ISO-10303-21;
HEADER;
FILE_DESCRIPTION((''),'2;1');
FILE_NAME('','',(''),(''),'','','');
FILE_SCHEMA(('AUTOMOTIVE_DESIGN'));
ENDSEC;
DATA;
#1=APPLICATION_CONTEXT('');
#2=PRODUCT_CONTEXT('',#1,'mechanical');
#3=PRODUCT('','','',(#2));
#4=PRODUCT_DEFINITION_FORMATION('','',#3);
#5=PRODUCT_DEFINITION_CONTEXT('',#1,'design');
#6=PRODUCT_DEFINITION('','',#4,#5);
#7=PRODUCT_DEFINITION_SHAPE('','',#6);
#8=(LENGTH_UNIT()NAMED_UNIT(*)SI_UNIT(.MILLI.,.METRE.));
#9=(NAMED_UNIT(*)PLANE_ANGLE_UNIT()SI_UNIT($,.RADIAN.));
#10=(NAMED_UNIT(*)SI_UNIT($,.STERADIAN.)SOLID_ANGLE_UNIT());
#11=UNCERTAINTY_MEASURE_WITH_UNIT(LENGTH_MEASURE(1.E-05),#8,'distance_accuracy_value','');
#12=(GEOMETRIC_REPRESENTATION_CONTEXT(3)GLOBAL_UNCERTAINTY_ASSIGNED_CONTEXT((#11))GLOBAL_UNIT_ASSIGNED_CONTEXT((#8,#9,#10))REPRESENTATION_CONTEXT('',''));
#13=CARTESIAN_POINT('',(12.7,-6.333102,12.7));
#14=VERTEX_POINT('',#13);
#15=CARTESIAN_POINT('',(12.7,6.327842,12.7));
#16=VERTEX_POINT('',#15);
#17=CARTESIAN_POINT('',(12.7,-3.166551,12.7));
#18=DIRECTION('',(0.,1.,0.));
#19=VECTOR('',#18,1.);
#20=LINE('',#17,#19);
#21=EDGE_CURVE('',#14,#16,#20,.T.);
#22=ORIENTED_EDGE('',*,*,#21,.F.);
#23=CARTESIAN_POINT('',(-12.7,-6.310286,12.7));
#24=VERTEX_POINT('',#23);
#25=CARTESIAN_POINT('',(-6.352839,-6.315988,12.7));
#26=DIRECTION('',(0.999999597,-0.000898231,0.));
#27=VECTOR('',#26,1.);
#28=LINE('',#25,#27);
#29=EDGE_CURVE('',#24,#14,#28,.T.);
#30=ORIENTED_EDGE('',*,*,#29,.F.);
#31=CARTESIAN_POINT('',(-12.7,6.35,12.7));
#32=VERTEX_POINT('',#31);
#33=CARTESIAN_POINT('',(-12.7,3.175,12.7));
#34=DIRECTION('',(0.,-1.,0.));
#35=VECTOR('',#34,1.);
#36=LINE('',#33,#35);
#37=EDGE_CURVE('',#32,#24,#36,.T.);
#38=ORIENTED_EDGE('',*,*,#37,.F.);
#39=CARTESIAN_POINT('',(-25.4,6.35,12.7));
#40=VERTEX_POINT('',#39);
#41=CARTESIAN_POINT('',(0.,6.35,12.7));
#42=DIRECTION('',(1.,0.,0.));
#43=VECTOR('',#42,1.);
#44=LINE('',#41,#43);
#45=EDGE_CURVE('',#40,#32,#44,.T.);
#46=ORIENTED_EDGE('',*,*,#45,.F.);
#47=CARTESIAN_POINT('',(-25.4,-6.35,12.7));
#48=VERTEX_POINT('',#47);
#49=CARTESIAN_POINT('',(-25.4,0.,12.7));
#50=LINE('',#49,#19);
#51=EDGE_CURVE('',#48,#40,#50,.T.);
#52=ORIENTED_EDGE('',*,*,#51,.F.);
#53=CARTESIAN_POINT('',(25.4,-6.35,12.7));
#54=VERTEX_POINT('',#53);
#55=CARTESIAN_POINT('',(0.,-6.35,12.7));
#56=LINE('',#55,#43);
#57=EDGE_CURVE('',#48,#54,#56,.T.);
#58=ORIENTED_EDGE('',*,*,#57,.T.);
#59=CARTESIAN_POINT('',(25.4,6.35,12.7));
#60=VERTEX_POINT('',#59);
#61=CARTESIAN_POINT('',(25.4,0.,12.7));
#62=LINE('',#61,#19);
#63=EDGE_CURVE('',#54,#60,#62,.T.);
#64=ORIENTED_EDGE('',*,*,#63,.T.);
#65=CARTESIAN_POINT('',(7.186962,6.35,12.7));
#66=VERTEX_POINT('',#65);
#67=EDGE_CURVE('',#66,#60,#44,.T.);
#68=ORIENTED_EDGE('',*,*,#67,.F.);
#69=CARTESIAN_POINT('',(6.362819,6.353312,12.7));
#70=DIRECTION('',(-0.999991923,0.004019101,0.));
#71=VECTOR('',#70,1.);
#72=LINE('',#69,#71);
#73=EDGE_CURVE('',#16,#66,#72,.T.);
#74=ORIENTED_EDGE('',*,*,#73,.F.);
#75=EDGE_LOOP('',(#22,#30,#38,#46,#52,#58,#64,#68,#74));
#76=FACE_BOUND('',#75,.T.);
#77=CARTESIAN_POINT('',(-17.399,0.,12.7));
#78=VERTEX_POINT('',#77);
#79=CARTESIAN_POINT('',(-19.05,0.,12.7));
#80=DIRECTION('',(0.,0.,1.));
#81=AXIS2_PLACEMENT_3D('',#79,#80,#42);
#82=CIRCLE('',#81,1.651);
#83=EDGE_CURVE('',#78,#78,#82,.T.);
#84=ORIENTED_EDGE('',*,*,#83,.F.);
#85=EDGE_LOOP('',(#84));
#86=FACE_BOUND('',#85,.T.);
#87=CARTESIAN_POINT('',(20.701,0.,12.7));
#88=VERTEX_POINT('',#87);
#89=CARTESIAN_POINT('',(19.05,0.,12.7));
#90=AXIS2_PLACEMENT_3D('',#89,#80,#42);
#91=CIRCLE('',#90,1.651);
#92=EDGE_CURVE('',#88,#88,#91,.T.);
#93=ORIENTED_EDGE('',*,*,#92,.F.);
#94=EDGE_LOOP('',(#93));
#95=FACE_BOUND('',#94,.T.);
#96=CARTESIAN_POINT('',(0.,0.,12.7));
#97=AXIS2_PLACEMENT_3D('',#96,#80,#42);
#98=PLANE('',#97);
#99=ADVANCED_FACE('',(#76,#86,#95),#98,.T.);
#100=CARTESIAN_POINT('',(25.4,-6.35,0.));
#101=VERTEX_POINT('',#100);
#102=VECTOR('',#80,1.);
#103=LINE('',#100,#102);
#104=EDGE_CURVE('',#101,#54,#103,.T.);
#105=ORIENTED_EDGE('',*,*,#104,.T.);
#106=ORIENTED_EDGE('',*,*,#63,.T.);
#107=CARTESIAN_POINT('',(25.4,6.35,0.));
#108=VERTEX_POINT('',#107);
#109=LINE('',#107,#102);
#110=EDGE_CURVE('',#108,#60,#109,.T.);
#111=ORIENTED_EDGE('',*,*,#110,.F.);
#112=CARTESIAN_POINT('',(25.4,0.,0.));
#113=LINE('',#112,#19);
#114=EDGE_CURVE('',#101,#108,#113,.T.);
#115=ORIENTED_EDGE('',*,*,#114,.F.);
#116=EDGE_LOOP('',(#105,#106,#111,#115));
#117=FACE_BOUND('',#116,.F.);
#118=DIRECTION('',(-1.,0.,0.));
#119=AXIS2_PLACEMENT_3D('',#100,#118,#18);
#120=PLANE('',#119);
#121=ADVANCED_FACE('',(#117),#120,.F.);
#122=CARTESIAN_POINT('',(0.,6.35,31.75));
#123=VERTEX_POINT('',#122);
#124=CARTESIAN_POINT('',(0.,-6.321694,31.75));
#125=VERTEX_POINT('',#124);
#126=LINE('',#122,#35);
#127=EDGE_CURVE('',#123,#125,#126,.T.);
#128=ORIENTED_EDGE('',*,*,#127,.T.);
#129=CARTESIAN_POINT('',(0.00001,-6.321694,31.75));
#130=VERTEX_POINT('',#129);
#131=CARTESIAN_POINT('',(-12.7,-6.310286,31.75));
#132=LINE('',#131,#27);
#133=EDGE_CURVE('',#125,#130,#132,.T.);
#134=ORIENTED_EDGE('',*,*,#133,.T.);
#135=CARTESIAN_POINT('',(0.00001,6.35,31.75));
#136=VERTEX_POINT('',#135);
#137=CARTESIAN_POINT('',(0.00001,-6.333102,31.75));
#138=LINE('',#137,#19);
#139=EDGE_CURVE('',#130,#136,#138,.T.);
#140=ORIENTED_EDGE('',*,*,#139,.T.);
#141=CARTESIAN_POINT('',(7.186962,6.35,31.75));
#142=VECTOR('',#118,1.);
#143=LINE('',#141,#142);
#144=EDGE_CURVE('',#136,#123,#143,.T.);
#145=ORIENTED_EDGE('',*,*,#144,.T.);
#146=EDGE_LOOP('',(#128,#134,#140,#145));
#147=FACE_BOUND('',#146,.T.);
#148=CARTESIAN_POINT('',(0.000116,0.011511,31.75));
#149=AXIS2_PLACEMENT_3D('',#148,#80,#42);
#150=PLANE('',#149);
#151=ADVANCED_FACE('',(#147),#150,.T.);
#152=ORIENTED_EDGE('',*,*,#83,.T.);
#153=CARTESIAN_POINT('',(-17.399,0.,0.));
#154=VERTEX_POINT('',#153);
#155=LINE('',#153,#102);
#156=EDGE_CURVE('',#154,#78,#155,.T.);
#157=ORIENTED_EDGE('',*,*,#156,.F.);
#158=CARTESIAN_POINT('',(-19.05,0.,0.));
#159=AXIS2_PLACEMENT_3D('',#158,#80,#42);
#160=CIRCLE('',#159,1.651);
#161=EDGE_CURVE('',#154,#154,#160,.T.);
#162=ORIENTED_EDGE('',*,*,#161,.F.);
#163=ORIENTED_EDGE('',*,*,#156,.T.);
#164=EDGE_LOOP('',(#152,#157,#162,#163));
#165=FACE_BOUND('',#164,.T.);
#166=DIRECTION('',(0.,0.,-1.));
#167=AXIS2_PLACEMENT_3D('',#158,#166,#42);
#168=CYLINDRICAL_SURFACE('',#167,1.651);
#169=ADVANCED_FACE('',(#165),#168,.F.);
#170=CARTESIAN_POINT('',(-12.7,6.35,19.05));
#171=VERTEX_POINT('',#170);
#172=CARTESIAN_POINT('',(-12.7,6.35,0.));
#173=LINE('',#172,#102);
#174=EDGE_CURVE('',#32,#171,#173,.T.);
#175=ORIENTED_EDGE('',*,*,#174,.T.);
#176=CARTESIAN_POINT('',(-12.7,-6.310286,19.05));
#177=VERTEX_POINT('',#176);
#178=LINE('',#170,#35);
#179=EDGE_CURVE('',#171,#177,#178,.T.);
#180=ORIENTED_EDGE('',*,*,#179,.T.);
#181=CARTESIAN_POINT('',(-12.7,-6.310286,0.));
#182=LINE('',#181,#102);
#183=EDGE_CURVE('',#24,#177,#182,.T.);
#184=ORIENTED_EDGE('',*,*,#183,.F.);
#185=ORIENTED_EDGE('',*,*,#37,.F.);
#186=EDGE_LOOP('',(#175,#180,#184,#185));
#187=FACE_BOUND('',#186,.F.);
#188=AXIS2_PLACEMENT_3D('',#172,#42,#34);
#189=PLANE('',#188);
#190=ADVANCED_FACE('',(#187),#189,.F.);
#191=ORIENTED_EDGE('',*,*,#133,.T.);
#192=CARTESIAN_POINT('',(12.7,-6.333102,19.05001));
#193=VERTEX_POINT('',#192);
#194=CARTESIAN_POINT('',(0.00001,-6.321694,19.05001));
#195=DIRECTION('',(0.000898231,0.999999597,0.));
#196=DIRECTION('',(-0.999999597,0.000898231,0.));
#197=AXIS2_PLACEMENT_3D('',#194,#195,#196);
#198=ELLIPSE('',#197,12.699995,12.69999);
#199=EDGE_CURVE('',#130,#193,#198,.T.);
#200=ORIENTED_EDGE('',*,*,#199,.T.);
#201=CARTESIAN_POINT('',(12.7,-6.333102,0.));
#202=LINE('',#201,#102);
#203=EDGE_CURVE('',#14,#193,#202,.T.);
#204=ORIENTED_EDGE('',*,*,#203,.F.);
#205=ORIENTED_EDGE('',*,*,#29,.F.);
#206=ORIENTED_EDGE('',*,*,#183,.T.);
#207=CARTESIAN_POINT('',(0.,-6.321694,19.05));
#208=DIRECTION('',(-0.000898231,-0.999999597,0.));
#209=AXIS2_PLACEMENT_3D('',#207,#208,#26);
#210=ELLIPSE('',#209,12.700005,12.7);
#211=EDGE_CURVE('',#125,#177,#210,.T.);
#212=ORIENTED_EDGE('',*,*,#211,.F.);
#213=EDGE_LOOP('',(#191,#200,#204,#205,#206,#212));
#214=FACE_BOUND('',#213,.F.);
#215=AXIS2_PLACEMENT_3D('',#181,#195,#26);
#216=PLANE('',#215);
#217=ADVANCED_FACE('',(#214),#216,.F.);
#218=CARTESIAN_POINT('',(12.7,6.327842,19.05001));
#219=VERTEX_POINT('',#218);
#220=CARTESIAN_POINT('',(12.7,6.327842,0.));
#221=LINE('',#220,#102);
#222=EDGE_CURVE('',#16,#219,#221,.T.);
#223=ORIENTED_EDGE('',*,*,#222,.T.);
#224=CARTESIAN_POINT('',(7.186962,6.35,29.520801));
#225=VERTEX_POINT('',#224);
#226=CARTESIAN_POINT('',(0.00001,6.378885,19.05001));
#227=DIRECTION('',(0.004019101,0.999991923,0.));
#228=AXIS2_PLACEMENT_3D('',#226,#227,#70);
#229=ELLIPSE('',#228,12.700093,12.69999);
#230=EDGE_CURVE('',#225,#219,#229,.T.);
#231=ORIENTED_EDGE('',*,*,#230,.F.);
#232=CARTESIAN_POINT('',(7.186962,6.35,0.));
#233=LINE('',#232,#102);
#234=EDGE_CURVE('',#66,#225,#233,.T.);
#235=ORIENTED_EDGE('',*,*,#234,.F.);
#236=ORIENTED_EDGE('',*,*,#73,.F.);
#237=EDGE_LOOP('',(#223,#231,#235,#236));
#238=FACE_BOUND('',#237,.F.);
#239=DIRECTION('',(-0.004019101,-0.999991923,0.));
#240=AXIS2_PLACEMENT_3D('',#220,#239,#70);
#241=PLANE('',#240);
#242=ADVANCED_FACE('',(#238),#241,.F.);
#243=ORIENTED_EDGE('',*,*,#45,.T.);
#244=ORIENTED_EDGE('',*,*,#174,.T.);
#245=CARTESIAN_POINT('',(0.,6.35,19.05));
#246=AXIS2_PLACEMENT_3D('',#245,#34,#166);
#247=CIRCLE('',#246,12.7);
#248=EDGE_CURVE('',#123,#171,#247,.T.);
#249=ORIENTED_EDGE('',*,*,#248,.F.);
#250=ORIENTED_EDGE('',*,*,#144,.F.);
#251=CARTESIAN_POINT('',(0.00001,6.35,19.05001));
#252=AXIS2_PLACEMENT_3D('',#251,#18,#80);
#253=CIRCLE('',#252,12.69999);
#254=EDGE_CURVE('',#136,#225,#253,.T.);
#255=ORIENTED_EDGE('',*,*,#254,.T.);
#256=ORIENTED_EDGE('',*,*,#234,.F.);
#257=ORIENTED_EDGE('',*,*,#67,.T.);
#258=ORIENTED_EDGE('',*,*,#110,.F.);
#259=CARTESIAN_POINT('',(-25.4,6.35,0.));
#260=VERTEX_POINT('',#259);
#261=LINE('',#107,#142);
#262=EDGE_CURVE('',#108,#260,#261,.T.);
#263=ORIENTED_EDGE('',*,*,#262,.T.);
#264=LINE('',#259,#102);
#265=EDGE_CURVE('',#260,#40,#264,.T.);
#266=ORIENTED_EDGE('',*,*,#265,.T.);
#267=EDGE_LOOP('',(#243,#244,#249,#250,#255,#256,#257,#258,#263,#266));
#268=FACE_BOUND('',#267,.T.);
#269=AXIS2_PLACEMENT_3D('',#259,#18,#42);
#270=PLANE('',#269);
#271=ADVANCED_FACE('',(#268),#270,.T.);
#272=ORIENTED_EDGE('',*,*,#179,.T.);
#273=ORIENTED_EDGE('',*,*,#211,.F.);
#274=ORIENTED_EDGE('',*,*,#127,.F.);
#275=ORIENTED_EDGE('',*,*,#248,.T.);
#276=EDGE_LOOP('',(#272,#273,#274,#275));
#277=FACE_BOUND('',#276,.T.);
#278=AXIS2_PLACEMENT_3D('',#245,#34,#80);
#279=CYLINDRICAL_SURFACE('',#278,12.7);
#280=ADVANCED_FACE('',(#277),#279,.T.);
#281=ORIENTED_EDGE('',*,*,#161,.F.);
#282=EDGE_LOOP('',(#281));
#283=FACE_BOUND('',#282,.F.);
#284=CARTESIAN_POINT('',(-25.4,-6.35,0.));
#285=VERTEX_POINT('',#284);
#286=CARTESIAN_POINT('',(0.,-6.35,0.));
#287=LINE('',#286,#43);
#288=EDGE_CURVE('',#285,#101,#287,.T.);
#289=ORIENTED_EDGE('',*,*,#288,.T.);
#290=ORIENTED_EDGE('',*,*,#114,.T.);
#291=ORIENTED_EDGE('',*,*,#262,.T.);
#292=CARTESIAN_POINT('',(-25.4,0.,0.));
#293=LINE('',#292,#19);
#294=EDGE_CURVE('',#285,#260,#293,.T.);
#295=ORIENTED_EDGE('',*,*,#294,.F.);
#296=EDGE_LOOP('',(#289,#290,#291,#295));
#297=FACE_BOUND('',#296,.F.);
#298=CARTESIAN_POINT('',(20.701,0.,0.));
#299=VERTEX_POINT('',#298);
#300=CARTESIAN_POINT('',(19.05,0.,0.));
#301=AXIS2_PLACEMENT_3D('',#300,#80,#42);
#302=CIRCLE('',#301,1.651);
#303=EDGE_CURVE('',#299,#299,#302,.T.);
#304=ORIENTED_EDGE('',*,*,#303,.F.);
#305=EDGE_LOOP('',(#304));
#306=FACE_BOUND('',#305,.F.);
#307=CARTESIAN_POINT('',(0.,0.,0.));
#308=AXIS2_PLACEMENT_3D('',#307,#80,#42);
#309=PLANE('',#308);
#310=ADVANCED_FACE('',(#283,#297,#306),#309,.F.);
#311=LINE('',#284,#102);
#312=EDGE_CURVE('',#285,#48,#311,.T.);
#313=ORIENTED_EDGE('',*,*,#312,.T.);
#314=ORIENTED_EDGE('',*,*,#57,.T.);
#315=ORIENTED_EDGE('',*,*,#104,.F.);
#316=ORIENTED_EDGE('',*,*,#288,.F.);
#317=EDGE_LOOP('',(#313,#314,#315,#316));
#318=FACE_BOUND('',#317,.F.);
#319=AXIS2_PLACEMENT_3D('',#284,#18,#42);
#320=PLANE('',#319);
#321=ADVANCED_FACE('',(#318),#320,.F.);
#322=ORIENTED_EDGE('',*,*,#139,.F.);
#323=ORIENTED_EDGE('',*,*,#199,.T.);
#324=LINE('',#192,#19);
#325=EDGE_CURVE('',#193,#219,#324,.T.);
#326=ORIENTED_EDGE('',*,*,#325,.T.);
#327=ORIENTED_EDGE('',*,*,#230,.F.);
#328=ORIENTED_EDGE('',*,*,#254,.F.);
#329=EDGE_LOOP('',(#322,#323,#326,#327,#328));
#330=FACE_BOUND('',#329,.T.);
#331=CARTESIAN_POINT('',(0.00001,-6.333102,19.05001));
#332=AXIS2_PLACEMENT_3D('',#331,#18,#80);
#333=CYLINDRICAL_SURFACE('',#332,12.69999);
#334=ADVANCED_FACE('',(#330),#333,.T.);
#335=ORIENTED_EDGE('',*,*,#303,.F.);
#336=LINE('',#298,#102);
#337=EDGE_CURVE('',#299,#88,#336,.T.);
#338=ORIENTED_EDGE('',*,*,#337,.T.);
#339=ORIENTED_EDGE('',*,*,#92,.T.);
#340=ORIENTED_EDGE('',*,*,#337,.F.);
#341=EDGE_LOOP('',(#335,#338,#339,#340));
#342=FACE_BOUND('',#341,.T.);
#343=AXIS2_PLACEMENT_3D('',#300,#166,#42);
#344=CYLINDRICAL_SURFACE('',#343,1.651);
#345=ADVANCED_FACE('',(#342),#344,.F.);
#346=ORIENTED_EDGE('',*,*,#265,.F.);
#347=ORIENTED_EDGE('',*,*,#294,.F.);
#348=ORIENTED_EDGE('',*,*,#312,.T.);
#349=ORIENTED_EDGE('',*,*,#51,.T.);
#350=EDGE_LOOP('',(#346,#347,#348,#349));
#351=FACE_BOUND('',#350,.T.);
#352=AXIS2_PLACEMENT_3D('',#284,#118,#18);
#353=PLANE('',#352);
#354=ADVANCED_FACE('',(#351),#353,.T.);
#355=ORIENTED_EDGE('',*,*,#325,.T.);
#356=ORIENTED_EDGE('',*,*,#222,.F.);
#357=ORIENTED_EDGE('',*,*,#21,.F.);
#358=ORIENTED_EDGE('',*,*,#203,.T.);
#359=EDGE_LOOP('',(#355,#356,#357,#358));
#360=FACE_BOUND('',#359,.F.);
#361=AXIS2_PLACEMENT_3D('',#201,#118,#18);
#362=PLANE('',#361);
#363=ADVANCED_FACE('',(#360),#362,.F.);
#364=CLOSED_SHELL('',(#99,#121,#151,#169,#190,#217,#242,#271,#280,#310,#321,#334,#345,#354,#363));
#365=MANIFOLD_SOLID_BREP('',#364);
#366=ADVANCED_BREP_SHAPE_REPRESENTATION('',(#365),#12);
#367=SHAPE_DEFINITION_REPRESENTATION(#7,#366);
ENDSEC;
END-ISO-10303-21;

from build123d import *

# Parameters (mm, degrees)
F2_DEPTH = 31.75
F0_W     = 50.8
F0_H     = 12.7
F0_R     = 1.651
F3_DEPTH = 12.7
F4_R     = 12.7
F5_R     = 12.69999


# Not quite as in the source:
# - a fillet or chamfer is up to 0.001 mm smaller than in the source, because OpenCascade refuses the exact size


with BuildPart() as f2:
    # F1 (on face) → F2 (new body)
    with BuildSketch(Plane.XY):
        Polygon((12.7, -6.3331015408), (12.7, 6.3278423622), (7.1869615835, 6.35), (-12.7, 6.35), (-12.7, -6.310286466), align=None)
    extrude(amount=F2_DEPTH)

    # F0 (on Top) → F3 (join)
    with BuildSketch(Plane.XY):
        Rectangle(F0_W, F0_H)
        with Locations((-19.05, 0)):
            Circle(F0_R, mode=Mode.SUBTRACT)
        with Locations((19.05, 0)):
            Circle(F0_R, mode=Mode.SUBTRACT)
    extrude(amount=F3_DEPTH)

    # F4
    f4_edges = [f2.edges().sort_by_distance(p)[0] for p in [
        (-12.7, 0.019857, 31.75),
    ]]
    fillet(f4_edges, radius=F4_R)

    # F5 (radius 12.7 in the source; OpenCascade refuses exactly that, so slightly less here)
    f5_edges = [f2.edges().sort_by_distance(p)[0] for p in [
        (12.7, -0.00263, 31.75),
    ]]
    fillet(f5_edges, radius=F5_R)


solid = f2.part
